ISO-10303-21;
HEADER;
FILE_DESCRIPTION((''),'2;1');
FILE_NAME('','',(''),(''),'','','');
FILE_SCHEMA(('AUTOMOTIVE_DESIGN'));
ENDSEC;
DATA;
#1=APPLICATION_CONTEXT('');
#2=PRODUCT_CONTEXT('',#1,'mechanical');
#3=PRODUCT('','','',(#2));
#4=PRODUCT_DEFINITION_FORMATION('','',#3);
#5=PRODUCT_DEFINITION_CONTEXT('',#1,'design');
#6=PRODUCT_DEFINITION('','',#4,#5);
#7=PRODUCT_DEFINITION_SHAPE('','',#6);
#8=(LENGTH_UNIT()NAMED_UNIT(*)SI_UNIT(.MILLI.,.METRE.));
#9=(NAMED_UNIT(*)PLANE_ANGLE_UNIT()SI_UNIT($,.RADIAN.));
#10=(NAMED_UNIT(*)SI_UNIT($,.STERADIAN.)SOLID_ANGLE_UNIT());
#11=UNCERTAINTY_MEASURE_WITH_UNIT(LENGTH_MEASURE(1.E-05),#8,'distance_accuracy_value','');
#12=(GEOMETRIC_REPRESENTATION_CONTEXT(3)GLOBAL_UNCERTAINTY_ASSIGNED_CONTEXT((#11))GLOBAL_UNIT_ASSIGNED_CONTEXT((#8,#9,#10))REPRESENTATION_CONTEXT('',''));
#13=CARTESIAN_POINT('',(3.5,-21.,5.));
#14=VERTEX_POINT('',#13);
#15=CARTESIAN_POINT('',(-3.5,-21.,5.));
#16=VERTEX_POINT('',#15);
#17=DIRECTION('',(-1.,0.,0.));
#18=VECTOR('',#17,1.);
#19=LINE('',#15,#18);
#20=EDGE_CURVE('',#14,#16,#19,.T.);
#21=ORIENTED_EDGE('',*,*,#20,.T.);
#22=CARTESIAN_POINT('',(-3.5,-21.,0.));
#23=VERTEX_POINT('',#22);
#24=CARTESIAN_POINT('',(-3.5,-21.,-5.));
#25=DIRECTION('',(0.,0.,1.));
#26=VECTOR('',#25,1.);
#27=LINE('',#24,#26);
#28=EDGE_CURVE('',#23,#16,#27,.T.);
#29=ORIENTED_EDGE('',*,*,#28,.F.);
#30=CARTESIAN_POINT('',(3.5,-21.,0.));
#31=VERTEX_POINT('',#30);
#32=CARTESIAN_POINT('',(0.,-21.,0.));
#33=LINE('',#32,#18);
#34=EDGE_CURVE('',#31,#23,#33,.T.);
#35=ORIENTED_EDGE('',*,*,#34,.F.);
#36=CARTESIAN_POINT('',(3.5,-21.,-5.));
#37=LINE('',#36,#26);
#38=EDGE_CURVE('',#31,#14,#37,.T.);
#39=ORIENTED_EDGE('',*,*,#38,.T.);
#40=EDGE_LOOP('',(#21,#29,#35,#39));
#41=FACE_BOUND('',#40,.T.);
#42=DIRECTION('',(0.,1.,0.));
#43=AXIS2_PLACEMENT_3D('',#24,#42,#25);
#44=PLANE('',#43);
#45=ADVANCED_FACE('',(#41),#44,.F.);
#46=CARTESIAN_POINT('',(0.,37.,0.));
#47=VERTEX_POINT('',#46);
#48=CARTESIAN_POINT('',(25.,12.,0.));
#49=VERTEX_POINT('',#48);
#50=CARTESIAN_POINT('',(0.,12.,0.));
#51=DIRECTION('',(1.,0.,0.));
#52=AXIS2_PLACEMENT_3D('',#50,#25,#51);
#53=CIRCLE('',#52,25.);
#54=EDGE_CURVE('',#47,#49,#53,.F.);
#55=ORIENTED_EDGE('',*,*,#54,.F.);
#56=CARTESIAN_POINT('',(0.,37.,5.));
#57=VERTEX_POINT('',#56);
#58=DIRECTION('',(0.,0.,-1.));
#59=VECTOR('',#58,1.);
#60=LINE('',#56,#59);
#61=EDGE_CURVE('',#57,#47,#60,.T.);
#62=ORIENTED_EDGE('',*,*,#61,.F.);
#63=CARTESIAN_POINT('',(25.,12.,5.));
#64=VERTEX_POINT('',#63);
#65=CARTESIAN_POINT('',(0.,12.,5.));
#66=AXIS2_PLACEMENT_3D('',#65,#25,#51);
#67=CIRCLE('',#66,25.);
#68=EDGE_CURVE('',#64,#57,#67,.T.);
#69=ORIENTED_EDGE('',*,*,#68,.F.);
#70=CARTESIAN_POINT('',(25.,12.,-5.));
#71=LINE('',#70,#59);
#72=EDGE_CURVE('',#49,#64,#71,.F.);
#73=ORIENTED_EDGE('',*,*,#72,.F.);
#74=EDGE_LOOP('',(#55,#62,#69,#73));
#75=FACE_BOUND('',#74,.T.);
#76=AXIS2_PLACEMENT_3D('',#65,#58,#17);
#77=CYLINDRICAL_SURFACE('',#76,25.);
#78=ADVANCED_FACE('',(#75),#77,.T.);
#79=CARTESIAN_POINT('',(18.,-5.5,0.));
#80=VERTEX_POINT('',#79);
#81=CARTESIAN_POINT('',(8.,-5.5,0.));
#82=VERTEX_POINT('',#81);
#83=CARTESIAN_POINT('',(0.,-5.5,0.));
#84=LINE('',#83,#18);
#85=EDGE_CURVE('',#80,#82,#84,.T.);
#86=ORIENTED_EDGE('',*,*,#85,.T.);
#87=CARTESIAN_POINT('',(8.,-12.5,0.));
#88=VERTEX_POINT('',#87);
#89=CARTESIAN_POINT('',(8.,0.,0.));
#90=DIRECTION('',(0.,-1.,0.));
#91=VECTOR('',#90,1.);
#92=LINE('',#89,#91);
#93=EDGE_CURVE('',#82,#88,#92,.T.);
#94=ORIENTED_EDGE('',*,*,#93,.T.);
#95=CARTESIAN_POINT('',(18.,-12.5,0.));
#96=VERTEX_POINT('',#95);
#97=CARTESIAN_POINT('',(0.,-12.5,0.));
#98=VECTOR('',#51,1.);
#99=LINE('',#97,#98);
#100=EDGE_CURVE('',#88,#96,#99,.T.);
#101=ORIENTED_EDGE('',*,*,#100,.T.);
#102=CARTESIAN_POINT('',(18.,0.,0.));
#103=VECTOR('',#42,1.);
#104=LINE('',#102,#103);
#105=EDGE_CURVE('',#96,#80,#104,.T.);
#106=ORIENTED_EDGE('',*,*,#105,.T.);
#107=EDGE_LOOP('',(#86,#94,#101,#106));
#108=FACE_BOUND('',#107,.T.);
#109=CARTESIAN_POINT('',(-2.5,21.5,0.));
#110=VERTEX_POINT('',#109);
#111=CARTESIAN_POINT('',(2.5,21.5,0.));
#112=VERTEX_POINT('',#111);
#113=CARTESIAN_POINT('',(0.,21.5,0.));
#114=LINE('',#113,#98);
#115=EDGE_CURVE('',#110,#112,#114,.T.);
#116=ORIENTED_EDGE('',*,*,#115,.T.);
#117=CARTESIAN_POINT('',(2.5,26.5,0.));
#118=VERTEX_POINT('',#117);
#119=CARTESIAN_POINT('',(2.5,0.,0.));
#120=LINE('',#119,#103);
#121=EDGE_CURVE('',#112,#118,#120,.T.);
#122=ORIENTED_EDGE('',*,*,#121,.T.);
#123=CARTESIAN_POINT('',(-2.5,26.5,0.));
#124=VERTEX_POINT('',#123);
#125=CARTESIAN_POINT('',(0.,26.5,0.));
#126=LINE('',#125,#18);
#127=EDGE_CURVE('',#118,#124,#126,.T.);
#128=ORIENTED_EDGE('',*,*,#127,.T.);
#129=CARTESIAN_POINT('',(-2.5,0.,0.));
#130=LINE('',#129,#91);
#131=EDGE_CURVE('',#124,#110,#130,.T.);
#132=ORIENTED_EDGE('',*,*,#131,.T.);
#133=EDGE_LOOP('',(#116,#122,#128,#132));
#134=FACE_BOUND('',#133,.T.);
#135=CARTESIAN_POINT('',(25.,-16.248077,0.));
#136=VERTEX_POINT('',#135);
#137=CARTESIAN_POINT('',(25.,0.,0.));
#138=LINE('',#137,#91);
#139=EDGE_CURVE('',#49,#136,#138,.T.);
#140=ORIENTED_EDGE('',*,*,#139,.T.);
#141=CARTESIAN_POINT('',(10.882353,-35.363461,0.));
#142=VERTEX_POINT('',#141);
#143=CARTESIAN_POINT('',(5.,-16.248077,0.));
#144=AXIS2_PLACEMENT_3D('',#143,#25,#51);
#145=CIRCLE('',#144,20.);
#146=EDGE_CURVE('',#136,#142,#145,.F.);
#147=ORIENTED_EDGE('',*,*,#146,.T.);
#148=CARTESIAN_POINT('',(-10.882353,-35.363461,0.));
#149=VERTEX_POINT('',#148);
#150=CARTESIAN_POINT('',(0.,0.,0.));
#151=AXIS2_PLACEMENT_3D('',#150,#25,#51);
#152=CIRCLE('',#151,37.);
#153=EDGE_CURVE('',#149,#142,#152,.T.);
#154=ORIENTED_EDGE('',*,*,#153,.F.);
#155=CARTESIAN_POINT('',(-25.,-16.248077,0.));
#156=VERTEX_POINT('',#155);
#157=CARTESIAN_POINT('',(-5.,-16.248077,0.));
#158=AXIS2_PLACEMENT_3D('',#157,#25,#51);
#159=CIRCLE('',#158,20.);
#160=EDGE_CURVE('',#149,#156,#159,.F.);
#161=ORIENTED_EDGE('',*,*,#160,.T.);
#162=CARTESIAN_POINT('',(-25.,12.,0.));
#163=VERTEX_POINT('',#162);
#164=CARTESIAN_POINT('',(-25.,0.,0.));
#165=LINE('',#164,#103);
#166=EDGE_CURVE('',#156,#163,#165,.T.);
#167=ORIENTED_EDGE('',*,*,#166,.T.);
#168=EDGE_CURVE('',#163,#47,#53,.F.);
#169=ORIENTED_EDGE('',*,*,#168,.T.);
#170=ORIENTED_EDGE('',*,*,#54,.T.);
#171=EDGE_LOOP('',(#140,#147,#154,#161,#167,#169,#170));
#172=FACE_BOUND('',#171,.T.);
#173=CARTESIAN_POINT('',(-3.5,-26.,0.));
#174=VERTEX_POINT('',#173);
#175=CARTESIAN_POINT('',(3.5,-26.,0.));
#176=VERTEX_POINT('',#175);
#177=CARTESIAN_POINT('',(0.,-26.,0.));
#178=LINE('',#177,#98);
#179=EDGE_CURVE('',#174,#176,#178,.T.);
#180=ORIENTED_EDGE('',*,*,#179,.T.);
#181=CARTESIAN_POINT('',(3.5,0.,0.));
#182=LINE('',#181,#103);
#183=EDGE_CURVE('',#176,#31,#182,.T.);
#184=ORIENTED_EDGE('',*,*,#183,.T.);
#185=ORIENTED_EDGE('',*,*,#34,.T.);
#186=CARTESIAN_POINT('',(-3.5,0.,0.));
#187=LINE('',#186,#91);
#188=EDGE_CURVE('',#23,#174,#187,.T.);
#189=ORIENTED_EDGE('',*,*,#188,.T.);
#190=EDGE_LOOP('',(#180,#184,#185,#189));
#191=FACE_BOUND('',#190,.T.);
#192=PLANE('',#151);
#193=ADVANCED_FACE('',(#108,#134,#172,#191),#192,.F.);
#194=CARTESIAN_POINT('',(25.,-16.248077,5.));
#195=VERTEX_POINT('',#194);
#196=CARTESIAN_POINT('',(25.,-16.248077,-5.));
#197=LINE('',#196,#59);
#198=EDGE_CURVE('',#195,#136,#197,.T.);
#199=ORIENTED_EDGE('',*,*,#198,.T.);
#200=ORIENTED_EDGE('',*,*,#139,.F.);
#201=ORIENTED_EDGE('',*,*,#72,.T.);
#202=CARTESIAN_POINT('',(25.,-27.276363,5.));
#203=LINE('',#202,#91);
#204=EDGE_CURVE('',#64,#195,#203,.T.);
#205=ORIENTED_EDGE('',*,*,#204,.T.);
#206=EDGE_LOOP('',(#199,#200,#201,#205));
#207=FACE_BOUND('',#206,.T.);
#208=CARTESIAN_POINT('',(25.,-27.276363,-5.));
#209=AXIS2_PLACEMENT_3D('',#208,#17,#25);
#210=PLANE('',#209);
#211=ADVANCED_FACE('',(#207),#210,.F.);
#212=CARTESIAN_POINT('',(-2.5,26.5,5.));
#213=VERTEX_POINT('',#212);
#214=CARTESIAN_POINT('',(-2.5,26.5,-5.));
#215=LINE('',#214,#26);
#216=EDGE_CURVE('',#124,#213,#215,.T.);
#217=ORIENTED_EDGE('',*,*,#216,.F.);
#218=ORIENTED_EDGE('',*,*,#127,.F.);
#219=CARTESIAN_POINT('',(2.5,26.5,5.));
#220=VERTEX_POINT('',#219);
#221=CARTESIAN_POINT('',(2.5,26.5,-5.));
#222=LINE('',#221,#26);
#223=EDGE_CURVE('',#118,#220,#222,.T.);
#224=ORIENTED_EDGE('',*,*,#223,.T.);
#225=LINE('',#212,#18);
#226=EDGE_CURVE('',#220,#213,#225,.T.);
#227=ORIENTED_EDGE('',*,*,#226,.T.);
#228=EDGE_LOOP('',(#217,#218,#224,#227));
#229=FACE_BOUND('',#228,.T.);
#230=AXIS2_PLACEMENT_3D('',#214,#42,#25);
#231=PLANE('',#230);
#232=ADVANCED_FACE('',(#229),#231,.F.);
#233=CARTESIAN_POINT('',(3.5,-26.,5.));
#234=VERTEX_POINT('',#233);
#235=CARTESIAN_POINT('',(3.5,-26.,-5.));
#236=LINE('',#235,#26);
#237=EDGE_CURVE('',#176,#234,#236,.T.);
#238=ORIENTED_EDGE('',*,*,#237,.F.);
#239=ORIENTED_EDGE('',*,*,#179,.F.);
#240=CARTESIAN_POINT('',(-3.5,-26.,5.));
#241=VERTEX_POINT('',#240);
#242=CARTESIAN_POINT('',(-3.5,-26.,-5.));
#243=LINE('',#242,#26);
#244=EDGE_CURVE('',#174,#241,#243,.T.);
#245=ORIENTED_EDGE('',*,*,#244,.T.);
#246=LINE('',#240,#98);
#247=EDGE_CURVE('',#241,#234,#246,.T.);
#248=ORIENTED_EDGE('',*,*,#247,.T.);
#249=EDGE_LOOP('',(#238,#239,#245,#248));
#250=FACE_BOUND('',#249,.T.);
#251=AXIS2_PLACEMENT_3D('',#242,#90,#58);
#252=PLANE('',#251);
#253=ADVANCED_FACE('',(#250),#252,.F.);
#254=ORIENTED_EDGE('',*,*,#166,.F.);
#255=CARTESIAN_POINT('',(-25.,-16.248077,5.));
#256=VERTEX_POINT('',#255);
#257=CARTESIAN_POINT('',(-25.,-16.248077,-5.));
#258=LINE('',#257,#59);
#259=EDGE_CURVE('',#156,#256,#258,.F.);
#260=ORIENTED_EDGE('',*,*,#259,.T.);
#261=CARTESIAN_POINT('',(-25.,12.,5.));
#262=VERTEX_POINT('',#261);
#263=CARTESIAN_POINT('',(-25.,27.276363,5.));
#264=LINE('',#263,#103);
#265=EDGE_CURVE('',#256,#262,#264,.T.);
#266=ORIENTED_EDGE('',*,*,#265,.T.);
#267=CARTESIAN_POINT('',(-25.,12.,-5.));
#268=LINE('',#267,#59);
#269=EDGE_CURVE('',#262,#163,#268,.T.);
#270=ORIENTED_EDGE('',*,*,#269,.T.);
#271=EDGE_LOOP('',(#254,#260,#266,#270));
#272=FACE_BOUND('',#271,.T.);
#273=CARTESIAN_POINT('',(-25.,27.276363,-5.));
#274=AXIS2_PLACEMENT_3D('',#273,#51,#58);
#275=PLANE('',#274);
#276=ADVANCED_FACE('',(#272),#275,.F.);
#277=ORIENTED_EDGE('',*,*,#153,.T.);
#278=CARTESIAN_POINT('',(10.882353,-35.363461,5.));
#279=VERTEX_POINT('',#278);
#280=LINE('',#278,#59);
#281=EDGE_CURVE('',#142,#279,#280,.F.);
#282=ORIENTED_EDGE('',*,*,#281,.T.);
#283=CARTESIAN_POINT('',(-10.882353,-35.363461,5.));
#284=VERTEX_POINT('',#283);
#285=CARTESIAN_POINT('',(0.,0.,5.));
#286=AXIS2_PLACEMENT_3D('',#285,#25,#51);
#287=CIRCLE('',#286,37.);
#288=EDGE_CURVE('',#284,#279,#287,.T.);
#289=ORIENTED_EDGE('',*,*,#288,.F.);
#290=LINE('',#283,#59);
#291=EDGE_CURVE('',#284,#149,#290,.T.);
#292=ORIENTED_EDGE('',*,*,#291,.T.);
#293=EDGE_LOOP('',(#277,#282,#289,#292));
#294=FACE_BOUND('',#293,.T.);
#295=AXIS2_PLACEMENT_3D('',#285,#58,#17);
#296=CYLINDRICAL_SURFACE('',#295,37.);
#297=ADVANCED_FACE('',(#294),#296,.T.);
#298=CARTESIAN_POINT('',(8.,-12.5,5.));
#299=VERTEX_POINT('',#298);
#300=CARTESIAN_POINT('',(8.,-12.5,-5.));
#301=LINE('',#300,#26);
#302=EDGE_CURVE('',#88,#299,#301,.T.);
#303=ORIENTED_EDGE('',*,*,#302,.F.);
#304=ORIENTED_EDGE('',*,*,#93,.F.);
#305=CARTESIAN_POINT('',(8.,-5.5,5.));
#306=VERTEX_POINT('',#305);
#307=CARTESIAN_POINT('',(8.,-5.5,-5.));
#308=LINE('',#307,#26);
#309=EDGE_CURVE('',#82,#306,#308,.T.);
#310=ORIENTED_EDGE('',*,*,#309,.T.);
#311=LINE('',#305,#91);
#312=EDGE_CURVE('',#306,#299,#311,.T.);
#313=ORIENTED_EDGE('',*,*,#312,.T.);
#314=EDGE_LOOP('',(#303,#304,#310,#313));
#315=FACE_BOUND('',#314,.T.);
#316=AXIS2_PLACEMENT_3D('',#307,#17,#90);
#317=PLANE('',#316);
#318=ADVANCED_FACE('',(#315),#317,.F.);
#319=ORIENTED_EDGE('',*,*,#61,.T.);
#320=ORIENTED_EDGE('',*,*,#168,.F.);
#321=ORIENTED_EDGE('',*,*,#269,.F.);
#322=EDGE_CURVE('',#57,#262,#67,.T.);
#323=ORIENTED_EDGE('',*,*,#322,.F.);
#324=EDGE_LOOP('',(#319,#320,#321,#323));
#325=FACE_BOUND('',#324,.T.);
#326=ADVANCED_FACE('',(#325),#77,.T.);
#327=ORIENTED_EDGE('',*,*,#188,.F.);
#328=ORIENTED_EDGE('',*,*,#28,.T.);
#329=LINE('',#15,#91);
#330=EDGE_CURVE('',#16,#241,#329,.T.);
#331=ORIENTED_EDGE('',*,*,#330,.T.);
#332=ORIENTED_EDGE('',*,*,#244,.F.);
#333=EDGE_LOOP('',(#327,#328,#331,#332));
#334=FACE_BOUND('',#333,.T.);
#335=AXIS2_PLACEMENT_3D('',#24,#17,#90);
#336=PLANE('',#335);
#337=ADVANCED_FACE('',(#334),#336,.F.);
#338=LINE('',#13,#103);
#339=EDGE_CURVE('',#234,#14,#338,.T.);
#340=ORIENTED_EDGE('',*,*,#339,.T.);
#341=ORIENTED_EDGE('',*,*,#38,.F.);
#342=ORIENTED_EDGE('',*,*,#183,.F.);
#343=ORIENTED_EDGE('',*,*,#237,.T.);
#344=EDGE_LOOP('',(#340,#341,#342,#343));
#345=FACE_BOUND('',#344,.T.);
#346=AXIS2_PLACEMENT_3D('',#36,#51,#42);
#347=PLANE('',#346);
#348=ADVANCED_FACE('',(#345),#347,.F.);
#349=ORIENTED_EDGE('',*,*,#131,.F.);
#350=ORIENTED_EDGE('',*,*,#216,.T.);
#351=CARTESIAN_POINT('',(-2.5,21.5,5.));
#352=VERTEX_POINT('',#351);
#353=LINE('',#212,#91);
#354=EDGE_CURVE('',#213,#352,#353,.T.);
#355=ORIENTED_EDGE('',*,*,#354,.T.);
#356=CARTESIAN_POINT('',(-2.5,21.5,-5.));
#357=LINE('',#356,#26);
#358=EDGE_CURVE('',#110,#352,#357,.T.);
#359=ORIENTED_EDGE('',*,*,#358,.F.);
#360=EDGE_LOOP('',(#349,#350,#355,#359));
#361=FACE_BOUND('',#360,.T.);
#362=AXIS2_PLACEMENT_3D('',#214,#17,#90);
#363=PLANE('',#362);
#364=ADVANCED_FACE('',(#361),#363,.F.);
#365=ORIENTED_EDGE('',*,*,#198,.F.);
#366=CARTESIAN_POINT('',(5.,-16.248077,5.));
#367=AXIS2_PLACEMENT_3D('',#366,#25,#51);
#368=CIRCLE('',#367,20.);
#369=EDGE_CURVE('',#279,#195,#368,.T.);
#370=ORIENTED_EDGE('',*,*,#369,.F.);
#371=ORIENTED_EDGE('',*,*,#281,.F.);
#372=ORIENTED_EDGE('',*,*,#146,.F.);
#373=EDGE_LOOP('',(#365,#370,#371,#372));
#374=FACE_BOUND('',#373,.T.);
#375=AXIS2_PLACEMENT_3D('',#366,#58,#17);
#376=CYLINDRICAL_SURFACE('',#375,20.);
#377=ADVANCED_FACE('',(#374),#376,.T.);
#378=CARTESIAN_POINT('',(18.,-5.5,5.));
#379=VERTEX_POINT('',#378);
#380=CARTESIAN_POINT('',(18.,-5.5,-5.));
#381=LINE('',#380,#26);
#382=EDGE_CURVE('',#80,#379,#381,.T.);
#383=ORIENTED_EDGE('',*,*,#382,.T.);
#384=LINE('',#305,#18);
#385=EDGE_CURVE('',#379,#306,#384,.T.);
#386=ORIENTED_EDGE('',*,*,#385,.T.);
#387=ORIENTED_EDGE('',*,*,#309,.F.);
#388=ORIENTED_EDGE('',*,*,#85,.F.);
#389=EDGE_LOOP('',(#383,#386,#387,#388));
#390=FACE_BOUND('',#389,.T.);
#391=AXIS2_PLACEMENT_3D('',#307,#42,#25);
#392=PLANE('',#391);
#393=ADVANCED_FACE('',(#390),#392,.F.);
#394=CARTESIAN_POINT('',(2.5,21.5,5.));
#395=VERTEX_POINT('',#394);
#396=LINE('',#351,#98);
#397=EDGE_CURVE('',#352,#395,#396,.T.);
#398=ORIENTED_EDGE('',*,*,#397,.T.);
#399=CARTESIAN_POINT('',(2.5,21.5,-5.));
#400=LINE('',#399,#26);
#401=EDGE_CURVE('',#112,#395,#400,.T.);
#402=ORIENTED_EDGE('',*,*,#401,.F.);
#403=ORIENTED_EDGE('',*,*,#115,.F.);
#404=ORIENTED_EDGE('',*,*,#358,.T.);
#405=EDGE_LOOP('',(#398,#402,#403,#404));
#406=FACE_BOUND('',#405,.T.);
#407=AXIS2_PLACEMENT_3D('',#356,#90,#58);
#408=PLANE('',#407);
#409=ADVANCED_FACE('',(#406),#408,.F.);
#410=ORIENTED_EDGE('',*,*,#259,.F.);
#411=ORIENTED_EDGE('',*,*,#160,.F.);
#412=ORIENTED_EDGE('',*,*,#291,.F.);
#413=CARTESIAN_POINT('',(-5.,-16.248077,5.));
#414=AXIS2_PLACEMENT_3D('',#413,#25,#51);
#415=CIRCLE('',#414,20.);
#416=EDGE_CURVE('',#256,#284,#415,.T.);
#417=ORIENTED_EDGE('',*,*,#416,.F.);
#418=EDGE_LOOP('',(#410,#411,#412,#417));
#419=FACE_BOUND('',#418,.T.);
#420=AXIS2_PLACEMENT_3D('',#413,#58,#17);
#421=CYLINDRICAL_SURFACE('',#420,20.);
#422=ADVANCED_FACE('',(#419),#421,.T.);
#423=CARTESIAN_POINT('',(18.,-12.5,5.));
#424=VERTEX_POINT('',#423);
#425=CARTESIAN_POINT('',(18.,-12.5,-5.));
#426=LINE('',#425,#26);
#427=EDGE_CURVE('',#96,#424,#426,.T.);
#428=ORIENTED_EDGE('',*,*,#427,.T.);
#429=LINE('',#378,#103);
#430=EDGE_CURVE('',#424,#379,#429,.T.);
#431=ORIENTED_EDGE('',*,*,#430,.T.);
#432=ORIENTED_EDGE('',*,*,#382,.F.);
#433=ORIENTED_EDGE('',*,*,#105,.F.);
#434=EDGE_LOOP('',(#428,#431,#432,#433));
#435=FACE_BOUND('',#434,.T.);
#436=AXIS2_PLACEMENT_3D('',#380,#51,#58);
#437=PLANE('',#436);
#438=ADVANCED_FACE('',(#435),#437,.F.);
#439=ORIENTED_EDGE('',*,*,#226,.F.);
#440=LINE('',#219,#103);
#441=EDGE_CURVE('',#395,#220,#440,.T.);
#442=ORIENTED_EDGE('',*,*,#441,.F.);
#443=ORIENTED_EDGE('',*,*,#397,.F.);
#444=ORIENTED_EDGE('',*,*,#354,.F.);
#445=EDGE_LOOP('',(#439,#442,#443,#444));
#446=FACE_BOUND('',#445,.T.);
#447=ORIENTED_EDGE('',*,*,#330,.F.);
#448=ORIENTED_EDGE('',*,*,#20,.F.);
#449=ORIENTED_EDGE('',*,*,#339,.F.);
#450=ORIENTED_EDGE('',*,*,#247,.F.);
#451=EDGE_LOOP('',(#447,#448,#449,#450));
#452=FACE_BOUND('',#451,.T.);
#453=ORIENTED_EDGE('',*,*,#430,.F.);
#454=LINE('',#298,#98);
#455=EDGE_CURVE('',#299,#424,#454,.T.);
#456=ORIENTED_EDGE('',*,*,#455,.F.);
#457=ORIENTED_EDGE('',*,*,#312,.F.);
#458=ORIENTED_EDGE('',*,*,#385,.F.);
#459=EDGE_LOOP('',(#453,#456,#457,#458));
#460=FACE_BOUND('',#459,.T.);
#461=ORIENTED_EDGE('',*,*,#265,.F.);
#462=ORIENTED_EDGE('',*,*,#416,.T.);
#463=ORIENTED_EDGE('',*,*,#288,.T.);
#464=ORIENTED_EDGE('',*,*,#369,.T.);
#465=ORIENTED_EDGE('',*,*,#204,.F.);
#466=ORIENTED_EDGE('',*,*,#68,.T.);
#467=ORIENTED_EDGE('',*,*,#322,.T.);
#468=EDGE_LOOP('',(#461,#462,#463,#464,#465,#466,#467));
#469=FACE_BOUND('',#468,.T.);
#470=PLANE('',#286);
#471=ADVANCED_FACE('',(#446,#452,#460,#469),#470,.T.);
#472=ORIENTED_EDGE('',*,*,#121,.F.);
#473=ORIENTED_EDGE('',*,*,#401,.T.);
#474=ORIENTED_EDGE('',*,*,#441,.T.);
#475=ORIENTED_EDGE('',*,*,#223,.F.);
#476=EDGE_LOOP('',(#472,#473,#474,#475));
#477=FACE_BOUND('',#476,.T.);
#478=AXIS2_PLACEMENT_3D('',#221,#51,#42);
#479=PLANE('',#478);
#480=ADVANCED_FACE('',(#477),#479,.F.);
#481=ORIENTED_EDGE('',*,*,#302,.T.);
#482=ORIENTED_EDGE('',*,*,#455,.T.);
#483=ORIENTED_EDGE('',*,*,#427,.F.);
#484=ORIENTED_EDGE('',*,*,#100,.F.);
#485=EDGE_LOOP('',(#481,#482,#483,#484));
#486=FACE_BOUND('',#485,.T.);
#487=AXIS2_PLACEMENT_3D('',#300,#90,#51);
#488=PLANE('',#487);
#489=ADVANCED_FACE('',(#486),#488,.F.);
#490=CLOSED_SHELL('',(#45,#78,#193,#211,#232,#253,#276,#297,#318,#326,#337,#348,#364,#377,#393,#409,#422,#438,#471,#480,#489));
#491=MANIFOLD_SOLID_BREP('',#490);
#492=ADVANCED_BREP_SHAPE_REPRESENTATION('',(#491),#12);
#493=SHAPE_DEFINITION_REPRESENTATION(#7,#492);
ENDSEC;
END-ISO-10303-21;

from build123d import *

# Parameters (mm, degrees)
SKETCH1_R           = 37
BOSS_EXTRUDE1_DEPTH = 5
CUT_EXTRUDE3_START  = -10
CUT_EXTRUDE3_DEPTH  = 10
FILLET2_R           = 25
FILLET3_R           = 20
SKETCH7_W           = 5
SKETCH7_H           = 5
SKETCH7_W_2         = 7
CUT_EXTRUDE4_DEPTH  = 10
SKETCH8_W           = 10
SKETCH8_H           = 7
CUT_EXTRUDE5_DEPTH  = 10


with BuildPart() as part:
    # Sketch1 → Boss-Extrude1 (new body)
    with BuildSketch(Plane.XY):
        Circle(SKETCH1_R)
    extrude(amount=BOSS_EXTRUDE1_DEPTH)

    # Sketch6 → Cut-Extrude3 (cut)
    with BuildSketch(Plane.XY.offset(5).offset(CUT_EXTRUDE3_START)):
        with BuildLine():
            Line((-25, 27.276363394), (-25, -27.276363394))
            ThreePointArc((-25, -27.276363394), (-37, 0), (-25, 27.276363394))
        make_face()
        with BuildLine():
            Line((25, -27.276363394), (25, 27.276363394))
            ThreePointArc((25, 27.276363394), (37, 0), (25, -27.276363394))
        make_face()
    extrude(amount=CUT_EXTRUDE3_DEPTH, mode=Mode.SUBTRACT)

    # Fillet2
    fillet2_edges = [part.edges().sort_by_distance(p)[0] for p in [
        (-25, 27.276363394, 2.5),
        (25, 27.276363394, 2.5),
    ]]
    fillet(fillet2_edges, radius=FILLET2_R - 0.0001)  # a hair under: the kernel refuses the full size

    # Fillet3
    fillet3_edges = [part.edges().sort_by_distance(p)[0] for p in [
        (-25, -27.276363394, 2.5),
        (25, -27.276363394, 2.5),
    ]]
    fillet(fillet3_edges, radius=FILLET3_R)

    # Sketch7 → Cut-Extrude4 (cut)
    with BuildSketch(Plane.XY.offset(5)):
        with Locations((0, 24)):
            Rectangle(SKETCH7_W, SKETCH7_H)
        with Locations((0, -23.5)):
            Rectangle(SKETCH7_W_2, SKETCH7_H)
    extrude(amount=-CUT_EXTRUDE4_DEPTH, mode=Mode.SUBTRACT)

    # Sketch8 → Cut-Extrude5 (cut)
    with BuildSketch(Plane.XY.offset(5)):
        with Locations((13, -9)):
            Rectangle(SKETCH8_W, SKETCH8_H)
    extrude(amount=-CUT_EXTRUDE5_DEPTH, mode=Mode.SUBTRACT)


solid = part.part
